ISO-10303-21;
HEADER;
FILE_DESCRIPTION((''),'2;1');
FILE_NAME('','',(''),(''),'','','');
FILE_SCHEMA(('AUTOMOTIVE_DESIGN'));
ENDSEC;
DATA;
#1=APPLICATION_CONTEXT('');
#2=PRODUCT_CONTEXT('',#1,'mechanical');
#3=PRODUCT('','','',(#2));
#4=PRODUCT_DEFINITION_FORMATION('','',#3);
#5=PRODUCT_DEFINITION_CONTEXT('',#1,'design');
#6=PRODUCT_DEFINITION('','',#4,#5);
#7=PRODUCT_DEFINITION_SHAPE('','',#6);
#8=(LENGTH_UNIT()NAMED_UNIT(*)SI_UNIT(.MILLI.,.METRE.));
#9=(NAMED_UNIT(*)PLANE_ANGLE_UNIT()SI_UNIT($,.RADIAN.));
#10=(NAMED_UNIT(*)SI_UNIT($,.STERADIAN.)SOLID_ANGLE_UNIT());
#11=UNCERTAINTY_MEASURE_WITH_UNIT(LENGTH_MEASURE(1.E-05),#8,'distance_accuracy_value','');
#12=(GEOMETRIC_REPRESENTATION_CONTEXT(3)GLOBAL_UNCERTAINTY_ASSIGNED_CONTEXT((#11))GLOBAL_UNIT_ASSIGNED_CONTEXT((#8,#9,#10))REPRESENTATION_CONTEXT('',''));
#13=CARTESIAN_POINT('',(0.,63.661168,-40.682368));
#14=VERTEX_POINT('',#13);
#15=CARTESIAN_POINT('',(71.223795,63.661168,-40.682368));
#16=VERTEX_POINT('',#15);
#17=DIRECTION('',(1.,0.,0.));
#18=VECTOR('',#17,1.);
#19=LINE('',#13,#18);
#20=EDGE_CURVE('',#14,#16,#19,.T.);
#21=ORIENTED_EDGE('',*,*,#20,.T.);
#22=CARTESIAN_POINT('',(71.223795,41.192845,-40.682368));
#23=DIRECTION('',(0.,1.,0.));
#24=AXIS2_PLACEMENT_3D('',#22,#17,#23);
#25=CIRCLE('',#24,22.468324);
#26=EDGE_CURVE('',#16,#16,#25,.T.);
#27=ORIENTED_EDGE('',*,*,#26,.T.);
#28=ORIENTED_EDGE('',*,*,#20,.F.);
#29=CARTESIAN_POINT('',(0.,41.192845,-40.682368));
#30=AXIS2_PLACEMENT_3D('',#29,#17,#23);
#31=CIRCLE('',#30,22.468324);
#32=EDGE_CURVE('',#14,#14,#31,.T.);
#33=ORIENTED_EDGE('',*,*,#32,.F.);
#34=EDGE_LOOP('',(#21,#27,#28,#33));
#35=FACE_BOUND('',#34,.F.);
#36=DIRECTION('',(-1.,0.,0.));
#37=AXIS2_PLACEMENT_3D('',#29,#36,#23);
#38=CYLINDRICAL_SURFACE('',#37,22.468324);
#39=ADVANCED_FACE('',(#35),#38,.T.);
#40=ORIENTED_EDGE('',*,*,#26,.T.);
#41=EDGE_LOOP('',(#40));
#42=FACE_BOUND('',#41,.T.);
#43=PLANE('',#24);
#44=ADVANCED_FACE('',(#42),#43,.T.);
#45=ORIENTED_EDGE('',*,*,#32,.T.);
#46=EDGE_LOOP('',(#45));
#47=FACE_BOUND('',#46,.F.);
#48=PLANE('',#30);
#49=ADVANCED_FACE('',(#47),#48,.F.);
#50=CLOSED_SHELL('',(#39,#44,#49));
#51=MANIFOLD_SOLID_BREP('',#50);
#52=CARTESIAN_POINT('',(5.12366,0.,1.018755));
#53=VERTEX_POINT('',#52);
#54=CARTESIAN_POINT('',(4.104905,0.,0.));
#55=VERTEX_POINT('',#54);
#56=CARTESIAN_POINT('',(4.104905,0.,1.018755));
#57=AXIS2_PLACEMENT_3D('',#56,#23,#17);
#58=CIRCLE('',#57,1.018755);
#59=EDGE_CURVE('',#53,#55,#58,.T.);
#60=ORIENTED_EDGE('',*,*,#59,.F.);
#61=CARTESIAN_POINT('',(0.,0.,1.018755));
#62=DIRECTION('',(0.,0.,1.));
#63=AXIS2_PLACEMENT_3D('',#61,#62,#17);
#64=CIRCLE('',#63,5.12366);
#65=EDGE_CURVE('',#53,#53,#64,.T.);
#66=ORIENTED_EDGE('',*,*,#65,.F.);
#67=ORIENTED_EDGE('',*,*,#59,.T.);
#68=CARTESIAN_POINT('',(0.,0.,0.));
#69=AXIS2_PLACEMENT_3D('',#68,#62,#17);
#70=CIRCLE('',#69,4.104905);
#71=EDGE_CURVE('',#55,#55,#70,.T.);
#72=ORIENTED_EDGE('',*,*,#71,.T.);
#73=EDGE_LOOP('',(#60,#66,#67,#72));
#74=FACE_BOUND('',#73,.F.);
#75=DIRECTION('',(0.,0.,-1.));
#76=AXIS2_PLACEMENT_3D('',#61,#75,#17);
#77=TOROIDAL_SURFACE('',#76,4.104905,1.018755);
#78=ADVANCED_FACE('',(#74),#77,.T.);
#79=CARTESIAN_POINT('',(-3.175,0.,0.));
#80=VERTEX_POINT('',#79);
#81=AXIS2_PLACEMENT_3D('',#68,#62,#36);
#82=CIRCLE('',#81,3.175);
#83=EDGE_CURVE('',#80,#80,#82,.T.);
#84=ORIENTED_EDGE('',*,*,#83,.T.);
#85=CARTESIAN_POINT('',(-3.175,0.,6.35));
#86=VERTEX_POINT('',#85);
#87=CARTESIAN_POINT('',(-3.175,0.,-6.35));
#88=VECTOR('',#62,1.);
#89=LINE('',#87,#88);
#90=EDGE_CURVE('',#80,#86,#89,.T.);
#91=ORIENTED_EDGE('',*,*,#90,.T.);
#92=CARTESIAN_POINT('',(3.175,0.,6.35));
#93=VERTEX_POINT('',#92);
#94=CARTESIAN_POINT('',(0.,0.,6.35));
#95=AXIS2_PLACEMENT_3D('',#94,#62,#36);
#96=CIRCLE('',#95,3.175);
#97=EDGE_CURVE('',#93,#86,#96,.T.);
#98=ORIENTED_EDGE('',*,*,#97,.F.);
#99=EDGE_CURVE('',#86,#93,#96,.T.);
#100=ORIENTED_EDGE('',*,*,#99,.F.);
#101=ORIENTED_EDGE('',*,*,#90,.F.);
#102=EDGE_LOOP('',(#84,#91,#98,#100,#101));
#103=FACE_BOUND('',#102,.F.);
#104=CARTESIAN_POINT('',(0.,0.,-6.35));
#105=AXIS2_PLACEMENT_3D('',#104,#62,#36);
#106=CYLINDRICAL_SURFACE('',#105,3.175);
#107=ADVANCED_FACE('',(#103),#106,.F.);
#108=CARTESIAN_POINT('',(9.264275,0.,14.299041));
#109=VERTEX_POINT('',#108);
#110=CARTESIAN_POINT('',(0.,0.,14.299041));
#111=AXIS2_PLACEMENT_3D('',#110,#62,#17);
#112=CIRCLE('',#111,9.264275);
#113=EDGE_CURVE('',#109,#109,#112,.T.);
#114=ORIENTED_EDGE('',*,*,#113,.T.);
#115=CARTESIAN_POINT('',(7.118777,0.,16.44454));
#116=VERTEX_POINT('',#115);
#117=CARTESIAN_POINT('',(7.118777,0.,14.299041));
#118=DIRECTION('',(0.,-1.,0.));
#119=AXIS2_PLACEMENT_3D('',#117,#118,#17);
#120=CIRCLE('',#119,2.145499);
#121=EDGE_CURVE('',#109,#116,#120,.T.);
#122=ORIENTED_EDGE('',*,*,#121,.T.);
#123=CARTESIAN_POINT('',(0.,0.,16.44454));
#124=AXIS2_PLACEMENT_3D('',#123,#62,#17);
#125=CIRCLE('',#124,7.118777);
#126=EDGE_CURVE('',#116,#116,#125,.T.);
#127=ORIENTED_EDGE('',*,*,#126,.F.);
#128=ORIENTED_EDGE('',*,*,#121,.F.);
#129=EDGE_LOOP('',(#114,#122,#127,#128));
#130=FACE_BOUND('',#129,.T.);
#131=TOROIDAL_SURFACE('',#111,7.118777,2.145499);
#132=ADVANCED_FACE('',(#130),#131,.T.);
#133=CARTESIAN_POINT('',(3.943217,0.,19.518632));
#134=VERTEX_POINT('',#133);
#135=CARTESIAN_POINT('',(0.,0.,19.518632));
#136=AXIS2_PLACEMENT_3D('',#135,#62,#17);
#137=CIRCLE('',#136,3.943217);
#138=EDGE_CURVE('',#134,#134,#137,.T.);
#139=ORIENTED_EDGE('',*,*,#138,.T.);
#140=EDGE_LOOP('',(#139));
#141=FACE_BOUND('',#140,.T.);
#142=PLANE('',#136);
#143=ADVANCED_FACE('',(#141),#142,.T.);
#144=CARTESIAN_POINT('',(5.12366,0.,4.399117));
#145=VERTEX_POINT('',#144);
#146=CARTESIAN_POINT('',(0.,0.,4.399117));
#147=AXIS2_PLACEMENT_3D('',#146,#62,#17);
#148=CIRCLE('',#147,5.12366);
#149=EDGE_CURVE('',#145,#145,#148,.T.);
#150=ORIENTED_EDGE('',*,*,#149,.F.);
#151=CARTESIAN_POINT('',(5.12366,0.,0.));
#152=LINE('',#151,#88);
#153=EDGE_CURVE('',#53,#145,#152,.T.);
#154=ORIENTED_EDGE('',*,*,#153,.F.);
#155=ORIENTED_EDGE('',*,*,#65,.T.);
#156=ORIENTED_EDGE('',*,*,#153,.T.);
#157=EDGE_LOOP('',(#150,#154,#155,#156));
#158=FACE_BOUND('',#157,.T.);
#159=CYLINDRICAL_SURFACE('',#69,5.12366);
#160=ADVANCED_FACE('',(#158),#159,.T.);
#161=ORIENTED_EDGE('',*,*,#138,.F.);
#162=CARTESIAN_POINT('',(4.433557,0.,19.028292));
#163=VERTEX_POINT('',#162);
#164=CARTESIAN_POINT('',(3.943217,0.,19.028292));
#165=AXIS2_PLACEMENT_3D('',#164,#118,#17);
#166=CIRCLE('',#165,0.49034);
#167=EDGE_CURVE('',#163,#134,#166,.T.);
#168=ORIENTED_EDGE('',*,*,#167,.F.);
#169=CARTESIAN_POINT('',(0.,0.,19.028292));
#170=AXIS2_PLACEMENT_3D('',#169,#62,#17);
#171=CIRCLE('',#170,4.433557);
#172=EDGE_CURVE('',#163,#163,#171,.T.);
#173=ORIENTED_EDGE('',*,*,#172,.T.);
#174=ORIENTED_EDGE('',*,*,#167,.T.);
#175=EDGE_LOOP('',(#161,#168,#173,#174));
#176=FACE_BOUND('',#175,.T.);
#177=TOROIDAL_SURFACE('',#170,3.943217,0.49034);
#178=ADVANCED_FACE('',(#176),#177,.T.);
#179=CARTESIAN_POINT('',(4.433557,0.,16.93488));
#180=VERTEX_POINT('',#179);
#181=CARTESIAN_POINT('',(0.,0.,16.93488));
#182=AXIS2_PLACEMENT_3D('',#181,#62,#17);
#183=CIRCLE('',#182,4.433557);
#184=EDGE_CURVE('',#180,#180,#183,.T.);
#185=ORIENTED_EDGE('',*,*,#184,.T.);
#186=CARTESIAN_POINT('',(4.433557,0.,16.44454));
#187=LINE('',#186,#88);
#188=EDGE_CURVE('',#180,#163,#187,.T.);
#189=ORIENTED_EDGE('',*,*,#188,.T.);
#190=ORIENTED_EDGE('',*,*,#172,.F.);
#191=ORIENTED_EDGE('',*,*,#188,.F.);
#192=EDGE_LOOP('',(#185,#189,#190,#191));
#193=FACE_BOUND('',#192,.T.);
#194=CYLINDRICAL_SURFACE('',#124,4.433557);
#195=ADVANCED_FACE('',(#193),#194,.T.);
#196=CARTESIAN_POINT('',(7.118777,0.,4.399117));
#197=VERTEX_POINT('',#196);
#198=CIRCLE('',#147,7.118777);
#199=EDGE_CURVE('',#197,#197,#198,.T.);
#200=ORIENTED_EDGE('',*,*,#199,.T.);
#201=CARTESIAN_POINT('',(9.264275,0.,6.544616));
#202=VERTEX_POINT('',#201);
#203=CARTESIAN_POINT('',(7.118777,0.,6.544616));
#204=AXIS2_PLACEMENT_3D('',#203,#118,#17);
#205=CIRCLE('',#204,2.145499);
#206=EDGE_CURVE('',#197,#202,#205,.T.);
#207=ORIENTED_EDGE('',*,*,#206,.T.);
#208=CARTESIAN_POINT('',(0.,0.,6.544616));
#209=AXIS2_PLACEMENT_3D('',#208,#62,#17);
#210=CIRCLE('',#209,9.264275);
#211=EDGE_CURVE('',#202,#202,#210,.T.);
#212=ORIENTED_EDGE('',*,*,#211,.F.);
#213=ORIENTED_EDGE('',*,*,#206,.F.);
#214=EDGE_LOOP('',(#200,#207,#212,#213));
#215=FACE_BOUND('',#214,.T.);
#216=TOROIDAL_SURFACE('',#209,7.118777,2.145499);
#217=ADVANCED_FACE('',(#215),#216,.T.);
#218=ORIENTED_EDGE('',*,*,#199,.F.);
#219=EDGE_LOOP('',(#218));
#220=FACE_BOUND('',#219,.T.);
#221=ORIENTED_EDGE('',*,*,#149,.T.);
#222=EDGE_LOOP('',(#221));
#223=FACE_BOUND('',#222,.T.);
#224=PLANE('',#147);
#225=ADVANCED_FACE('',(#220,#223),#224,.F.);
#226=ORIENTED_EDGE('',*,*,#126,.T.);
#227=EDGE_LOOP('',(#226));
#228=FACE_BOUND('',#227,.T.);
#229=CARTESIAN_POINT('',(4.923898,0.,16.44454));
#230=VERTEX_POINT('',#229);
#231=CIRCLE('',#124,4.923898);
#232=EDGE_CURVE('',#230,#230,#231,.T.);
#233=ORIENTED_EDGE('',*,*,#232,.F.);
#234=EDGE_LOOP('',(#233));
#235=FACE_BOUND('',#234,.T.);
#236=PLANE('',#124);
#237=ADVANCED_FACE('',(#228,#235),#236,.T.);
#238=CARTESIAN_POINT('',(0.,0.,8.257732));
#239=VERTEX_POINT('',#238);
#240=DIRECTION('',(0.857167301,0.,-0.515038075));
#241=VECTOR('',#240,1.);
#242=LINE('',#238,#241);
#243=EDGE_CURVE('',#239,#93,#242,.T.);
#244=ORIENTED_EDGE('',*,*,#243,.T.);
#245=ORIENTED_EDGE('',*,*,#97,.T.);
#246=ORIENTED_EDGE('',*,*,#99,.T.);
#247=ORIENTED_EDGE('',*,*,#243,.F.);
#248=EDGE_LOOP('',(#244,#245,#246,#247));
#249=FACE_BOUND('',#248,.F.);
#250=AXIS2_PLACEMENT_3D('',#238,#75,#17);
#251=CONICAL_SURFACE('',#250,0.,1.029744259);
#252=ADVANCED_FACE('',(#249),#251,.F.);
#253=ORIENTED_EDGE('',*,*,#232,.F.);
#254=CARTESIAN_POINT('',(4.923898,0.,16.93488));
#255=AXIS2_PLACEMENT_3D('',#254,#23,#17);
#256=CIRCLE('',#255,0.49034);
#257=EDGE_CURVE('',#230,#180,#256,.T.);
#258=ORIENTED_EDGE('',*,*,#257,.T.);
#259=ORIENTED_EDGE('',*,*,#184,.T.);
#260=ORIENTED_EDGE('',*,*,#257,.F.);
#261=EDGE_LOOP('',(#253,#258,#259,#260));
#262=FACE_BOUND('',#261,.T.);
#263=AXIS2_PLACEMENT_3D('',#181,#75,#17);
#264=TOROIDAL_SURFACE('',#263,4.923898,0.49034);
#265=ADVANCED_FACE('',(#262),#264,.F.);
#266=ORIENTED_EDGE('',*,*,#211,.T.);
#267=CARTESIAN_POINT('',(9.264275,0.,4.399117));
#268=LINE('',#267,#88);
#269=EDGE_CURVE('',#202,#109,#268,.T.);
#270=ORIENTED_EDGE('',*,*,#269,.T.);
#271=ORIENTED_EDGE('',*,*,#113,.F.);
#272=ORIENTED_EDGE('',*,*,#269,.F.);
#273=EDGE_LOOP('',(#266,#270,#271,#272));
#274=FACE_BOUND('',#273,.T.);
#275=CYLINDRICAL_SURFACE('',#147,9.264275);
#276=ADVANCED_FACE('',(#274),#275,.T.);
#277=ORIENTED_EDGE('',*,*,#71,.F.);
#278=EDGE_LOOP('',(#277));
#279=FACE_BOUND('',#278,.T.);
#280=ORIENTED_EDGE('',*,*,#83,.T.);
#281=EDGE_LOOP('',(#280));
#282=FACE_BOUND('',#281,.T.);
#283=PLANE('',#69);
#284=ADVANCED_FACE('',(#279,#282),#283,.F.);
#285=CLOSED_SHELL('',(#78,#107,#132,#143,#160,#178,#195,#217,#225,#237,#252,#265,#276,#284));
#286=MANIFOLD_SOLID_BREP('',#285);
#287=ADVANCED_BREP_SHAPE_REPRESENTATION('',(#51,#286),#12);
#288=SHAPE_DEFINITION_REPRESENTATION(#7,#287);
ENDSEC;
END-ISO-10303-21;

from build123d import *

# Parameters (mm, degrees)
F2_R     = 2.145498841
F4_R     = 0.4903403449
F6_D     = 6.35
F6_DEPTH = 6.35
F6_TIP   = 1.9077324654
F7_R     = 1.0187545891
F3_R     = 22.4683237684
F8_DEPTH = 71.223795414


with BuildPart() as f1:
    # F0 (on Front) → F1 (revolve)
    with BuildSketch(Plane.XZ):
        Polygon((4.4335573912, 19.5186324418), (0, 19.5186324418), (0, 0), (5.1236599684, 0), (5.1236599684, 4.3991170824), (9.2642754316, 4.3991170824), (9.2642754316, 16.4445396513), (4.4335573912, 16.4445396513), align=None)
    revolve(axis=Axis((0, 0, 9.7593162209), (0, 0, 1)))

    # F2
    f2_edges = [f1.edges().sort_by_distance(p)[0] for p in [
        (-9.264275, 0, 16.44454),
        (-9.264275, 0, 4.399117),
        (9.264275, 0, 10.421828),
    ]]
    fillet(f2_edges, radius=F2_R)

    # F4
    f4_edges = [f1.edges().sort_by_distance(p)[0] for p in [
        (-4.433557, 0, 19.518632),
        (-4.433557, 0, 16.44454),
        (4.433557, 0, 17.981586),
    ]]
    fillet(f4_edges, radius=F4_R)

    # F6
    with Locations(Plane(origin=(0, 0, 0), x_dir=(1, 0, 0), z_dir=(0, 0, -1))):
        with Locations((0, 0)):
            Hole(F6_D / 2, depth=F6_DEPTH)
            with Locations((0, 0, -(F6_DEPTH + F6_TIP / 2))):  # 118° drill point
                Cone(0, F6_D / 2, F6_TIP, mode=Mode.SUBTRACT)

    # F7
    f7_edges = [f1.edges().sort_by_distance(p)[0] for p in [
        (-9.264275, 0, 6.544616),
        (-5.12366, 0, 0),
        (-9.264275, 0, 14.299041),
        (-4.433557, 0, 19.028292),
    ]]
    fillet(f7_edges, radius=F7_R)


with BuildPart() as f8:
    # F3 (on Right) → F8 (new body)
    with BuildSketch(Plane.YZ):
        with Locations((41.1928445101, -40.6823679805)):
            Circle(F3_R)
    extrude(amount=F8_DEPTH)


solid = Compound([f1.part, f8.part])
